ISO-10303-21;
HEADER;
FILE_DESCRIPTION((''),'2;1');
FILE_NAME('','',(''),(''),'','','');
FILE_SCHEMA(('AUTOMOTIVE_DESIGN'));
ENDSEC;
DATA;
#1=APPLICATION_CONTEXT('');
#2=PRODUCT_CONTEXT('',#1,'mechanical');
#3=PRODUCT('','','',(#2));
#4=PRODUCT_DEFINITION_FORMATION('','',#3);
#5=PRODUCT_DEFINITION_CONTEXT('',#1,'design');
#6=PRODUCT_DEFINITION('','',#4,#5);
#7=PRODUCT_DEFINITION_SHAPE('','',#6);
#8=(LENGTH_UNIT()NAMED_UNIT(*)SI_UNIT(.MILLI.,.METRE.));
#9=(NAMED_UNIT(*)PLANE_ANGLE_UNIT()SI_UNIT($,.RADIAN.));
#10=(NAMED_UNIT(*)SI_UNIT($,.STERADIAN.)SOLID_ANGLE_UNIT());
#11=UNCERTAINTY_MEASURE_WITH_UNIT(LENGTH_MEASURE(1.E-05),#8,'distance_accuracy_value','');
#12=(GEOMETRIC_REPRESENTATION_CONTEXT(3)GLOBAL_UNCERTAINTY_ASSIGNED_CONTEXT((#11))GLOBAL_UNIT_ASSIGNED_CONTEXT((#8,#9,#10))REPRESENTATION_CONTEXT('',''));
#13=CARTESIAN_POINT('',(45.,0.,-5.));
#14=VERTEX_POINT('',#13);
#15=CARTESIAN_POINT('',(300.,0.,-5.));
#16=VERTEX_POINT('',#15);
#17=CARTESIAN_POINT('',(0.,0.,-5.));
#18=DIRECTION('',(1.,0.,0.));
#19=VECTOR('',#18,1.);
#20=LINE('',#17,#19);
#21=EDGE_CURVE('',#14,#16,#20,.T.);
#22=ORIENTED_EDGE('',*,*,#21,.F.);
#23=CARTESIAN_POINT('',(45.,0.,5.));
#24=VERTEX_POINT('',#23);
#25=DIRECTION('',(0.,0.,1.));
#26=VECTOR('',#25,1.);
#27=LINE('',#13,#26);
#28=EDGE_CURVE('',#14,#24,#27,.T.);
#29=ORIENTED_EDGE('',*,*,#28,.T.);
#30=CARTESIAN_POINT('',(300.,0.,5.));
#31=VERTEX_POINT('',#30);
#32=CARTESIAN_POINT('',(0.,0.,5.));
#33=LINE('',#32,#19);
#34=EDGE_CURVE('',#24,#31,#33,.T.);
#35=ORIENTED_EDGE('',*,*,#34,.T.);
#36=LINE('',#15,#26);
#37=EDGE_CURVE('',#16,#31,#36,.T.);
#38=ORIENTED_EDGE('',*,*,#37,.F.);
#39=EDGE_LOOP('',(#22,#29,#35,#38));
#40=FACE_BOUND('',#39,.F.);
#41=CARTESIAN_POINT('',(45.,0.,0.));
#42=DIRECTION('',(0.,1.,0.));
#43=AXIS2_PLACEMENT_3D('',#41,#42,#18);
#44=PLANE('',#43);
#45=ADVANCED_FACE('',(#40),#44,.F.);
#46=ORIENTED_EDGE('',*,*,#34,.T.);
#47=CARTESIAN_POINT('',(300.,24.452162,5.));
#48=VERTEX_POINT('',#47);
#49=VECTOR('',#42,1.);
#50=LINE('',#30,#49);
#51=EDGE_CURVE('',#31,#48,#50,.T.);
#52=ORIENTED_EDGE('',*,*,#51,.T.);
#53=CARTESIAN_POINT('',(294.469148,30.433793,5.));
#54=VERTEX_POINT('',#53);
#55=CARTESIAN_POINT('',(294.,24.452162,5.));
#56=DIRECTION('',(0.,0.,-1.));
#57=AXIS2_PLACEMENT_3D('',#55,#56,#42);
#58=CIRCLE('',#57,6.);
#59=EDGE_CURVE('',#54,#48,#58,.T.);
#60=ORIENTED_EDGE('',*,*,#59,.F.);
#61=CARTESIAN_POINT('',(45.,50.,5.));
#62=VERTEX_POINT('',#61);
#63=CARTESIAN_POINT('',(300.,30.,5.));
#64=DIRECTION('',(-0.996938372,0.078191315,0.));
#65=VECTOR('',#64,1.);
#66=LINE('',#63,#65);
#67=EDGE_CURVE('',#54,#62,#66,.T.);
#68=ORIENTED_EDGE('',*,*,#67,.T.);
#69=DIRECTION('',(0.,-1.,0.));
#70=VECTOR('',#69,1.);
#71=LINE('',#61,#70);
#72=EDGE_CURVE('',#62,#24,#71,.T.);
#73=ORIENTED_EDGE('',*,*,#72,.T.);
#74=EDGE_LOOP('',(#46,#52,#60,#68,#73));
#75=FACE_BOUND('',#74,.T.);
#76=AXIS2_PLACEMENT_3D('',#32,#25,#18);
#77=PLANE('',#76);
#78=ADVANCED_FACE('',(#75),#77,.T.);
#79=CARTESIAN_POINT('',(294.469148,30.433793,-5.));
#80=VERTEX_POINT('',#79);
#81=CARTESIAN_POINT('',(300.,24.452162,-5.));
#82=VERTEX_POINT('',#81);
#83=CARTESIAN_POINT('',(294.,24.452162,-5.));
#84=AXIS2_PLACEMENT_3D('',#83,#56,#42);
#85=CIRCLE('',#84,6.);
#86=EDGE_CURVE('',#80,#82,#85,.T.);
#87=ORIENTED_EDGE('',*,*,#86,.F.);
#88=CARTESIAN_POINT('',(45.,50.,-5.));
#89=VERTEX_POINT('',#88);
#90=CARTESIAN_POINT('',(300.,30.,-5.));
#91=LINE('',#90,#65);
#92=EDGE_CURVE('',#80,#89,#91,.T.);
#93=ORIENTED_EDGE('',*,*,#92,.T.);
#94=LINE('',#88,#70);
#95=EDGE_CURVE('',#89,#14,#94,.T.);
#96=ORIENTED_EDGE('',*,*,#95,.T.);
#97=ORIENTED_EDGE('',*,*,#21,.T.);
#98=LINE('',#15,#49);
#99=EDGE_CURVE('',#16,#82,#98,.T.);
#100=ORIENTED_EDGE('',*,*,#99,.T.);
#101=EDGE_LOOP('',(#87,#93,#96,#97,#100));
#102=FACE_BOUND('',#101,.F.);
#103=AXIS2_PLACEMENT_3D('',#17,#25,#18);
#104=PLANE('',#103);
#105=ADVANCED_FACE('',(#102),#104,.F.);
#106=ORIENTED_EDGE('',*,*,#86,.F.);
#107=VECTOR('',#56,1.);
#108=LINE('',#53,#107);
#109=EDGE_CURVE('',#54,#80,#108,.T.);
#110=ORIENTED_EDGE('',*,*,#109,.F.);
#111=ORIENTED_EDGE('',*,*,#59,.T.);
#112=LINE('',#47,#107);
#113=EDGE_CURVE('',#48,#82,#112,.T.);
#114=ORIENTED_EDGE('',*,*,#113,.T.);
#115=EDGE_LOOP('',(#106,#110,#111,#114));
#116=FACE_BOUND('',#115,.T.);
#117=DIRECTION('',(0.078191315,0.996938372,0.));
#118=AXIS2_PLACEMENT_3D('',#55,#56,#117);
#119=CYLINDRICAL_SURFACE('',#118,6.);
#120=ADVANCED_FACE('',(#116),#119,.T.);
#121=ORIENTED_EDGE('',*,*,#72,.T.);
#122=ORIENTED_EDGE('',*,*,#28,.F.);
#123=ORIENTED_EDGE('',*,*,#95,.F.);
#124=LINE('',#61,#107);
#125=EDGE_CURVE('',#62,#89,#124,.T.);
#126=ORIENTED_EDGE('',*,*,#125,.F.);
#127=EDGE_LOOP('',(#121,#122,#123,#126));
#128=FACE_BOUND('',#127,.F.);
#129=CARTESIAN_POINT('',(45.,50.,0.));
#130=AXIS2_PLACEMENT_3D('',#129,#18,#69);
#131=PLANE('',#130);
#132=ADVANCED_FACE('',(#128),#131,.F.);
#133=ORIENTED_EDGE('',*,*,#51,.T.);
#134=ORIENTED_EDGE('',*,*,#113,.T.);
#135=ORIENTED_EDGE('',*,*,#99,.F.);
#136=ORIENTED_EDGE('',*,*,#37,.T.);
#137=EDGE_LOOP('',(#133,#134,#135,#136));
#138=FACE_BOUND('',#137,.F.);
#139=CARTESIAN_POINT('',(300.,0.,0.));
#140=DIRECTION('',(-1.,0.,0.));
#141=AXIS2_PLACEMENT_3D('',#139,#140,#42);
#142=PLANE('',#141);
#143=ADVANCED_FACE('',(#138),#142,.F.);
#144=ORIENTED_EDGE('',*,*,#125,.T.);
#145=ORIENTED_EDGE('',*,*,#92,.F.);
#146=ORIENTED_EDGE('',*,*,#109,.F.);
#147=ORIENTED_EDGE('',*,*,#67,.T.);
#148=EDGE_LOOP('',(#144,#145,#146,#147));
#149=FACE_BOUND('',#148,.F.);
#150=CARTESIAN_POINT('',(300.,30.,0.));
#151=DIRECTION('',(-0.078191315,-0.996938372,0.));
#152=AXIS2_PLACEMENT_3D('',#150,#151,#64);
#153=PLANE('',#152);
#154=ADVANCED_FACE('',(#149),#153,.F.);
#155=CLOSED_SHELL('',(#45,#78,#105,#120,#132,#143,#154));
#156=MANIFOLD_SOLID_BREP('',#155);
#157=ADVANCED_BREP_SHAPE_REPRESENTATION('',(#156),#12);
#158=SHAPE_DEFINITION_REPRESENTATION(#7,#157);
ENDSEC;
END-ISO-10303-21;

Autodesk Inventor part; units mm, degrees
ref_plane "YZ Plane" through (0, 0, 0) normal (1, 0, 0) x (0, 1, 0)
ref_plane "XZ Plane" through (0, 0, 0) normal (0, 1, 0) x (-1, 0, 0)
ref_plane "XY Plane" through (0, 0, 0) normal (0, 0, 1) x (1, 0, 0)
sketch "Sketch3" plane through (0, 0, 0) normal (0, 0, 1) x (1, 0, 0)
  line L0 (0, 0) -> (300, 0)
  line L1 (300, 0) -> (300, 30)
  line L2 (300, 30) -> (-5.542, 53.9641)
  line L3 (45, 50) -> (45, 0)
  dimension "d11" = 300
  dimension "d12" = 30
  dimension "d13" = 45
  dimension "d14" = 50
extrude "Plate1" add sketch "Sketch3" along normal mid plane 10
fillet "Corner Round1" radius 6 1 edges at (300, 30, 0)
equation "\"d15\" = Thickness"
equation "\"BendReliefDepth\" = 0.5 * Thickness"
equation "\"Thickness\" = 10"
properties part number "SLM 1614 charging hatch reinf 500mm" material "Steel"
